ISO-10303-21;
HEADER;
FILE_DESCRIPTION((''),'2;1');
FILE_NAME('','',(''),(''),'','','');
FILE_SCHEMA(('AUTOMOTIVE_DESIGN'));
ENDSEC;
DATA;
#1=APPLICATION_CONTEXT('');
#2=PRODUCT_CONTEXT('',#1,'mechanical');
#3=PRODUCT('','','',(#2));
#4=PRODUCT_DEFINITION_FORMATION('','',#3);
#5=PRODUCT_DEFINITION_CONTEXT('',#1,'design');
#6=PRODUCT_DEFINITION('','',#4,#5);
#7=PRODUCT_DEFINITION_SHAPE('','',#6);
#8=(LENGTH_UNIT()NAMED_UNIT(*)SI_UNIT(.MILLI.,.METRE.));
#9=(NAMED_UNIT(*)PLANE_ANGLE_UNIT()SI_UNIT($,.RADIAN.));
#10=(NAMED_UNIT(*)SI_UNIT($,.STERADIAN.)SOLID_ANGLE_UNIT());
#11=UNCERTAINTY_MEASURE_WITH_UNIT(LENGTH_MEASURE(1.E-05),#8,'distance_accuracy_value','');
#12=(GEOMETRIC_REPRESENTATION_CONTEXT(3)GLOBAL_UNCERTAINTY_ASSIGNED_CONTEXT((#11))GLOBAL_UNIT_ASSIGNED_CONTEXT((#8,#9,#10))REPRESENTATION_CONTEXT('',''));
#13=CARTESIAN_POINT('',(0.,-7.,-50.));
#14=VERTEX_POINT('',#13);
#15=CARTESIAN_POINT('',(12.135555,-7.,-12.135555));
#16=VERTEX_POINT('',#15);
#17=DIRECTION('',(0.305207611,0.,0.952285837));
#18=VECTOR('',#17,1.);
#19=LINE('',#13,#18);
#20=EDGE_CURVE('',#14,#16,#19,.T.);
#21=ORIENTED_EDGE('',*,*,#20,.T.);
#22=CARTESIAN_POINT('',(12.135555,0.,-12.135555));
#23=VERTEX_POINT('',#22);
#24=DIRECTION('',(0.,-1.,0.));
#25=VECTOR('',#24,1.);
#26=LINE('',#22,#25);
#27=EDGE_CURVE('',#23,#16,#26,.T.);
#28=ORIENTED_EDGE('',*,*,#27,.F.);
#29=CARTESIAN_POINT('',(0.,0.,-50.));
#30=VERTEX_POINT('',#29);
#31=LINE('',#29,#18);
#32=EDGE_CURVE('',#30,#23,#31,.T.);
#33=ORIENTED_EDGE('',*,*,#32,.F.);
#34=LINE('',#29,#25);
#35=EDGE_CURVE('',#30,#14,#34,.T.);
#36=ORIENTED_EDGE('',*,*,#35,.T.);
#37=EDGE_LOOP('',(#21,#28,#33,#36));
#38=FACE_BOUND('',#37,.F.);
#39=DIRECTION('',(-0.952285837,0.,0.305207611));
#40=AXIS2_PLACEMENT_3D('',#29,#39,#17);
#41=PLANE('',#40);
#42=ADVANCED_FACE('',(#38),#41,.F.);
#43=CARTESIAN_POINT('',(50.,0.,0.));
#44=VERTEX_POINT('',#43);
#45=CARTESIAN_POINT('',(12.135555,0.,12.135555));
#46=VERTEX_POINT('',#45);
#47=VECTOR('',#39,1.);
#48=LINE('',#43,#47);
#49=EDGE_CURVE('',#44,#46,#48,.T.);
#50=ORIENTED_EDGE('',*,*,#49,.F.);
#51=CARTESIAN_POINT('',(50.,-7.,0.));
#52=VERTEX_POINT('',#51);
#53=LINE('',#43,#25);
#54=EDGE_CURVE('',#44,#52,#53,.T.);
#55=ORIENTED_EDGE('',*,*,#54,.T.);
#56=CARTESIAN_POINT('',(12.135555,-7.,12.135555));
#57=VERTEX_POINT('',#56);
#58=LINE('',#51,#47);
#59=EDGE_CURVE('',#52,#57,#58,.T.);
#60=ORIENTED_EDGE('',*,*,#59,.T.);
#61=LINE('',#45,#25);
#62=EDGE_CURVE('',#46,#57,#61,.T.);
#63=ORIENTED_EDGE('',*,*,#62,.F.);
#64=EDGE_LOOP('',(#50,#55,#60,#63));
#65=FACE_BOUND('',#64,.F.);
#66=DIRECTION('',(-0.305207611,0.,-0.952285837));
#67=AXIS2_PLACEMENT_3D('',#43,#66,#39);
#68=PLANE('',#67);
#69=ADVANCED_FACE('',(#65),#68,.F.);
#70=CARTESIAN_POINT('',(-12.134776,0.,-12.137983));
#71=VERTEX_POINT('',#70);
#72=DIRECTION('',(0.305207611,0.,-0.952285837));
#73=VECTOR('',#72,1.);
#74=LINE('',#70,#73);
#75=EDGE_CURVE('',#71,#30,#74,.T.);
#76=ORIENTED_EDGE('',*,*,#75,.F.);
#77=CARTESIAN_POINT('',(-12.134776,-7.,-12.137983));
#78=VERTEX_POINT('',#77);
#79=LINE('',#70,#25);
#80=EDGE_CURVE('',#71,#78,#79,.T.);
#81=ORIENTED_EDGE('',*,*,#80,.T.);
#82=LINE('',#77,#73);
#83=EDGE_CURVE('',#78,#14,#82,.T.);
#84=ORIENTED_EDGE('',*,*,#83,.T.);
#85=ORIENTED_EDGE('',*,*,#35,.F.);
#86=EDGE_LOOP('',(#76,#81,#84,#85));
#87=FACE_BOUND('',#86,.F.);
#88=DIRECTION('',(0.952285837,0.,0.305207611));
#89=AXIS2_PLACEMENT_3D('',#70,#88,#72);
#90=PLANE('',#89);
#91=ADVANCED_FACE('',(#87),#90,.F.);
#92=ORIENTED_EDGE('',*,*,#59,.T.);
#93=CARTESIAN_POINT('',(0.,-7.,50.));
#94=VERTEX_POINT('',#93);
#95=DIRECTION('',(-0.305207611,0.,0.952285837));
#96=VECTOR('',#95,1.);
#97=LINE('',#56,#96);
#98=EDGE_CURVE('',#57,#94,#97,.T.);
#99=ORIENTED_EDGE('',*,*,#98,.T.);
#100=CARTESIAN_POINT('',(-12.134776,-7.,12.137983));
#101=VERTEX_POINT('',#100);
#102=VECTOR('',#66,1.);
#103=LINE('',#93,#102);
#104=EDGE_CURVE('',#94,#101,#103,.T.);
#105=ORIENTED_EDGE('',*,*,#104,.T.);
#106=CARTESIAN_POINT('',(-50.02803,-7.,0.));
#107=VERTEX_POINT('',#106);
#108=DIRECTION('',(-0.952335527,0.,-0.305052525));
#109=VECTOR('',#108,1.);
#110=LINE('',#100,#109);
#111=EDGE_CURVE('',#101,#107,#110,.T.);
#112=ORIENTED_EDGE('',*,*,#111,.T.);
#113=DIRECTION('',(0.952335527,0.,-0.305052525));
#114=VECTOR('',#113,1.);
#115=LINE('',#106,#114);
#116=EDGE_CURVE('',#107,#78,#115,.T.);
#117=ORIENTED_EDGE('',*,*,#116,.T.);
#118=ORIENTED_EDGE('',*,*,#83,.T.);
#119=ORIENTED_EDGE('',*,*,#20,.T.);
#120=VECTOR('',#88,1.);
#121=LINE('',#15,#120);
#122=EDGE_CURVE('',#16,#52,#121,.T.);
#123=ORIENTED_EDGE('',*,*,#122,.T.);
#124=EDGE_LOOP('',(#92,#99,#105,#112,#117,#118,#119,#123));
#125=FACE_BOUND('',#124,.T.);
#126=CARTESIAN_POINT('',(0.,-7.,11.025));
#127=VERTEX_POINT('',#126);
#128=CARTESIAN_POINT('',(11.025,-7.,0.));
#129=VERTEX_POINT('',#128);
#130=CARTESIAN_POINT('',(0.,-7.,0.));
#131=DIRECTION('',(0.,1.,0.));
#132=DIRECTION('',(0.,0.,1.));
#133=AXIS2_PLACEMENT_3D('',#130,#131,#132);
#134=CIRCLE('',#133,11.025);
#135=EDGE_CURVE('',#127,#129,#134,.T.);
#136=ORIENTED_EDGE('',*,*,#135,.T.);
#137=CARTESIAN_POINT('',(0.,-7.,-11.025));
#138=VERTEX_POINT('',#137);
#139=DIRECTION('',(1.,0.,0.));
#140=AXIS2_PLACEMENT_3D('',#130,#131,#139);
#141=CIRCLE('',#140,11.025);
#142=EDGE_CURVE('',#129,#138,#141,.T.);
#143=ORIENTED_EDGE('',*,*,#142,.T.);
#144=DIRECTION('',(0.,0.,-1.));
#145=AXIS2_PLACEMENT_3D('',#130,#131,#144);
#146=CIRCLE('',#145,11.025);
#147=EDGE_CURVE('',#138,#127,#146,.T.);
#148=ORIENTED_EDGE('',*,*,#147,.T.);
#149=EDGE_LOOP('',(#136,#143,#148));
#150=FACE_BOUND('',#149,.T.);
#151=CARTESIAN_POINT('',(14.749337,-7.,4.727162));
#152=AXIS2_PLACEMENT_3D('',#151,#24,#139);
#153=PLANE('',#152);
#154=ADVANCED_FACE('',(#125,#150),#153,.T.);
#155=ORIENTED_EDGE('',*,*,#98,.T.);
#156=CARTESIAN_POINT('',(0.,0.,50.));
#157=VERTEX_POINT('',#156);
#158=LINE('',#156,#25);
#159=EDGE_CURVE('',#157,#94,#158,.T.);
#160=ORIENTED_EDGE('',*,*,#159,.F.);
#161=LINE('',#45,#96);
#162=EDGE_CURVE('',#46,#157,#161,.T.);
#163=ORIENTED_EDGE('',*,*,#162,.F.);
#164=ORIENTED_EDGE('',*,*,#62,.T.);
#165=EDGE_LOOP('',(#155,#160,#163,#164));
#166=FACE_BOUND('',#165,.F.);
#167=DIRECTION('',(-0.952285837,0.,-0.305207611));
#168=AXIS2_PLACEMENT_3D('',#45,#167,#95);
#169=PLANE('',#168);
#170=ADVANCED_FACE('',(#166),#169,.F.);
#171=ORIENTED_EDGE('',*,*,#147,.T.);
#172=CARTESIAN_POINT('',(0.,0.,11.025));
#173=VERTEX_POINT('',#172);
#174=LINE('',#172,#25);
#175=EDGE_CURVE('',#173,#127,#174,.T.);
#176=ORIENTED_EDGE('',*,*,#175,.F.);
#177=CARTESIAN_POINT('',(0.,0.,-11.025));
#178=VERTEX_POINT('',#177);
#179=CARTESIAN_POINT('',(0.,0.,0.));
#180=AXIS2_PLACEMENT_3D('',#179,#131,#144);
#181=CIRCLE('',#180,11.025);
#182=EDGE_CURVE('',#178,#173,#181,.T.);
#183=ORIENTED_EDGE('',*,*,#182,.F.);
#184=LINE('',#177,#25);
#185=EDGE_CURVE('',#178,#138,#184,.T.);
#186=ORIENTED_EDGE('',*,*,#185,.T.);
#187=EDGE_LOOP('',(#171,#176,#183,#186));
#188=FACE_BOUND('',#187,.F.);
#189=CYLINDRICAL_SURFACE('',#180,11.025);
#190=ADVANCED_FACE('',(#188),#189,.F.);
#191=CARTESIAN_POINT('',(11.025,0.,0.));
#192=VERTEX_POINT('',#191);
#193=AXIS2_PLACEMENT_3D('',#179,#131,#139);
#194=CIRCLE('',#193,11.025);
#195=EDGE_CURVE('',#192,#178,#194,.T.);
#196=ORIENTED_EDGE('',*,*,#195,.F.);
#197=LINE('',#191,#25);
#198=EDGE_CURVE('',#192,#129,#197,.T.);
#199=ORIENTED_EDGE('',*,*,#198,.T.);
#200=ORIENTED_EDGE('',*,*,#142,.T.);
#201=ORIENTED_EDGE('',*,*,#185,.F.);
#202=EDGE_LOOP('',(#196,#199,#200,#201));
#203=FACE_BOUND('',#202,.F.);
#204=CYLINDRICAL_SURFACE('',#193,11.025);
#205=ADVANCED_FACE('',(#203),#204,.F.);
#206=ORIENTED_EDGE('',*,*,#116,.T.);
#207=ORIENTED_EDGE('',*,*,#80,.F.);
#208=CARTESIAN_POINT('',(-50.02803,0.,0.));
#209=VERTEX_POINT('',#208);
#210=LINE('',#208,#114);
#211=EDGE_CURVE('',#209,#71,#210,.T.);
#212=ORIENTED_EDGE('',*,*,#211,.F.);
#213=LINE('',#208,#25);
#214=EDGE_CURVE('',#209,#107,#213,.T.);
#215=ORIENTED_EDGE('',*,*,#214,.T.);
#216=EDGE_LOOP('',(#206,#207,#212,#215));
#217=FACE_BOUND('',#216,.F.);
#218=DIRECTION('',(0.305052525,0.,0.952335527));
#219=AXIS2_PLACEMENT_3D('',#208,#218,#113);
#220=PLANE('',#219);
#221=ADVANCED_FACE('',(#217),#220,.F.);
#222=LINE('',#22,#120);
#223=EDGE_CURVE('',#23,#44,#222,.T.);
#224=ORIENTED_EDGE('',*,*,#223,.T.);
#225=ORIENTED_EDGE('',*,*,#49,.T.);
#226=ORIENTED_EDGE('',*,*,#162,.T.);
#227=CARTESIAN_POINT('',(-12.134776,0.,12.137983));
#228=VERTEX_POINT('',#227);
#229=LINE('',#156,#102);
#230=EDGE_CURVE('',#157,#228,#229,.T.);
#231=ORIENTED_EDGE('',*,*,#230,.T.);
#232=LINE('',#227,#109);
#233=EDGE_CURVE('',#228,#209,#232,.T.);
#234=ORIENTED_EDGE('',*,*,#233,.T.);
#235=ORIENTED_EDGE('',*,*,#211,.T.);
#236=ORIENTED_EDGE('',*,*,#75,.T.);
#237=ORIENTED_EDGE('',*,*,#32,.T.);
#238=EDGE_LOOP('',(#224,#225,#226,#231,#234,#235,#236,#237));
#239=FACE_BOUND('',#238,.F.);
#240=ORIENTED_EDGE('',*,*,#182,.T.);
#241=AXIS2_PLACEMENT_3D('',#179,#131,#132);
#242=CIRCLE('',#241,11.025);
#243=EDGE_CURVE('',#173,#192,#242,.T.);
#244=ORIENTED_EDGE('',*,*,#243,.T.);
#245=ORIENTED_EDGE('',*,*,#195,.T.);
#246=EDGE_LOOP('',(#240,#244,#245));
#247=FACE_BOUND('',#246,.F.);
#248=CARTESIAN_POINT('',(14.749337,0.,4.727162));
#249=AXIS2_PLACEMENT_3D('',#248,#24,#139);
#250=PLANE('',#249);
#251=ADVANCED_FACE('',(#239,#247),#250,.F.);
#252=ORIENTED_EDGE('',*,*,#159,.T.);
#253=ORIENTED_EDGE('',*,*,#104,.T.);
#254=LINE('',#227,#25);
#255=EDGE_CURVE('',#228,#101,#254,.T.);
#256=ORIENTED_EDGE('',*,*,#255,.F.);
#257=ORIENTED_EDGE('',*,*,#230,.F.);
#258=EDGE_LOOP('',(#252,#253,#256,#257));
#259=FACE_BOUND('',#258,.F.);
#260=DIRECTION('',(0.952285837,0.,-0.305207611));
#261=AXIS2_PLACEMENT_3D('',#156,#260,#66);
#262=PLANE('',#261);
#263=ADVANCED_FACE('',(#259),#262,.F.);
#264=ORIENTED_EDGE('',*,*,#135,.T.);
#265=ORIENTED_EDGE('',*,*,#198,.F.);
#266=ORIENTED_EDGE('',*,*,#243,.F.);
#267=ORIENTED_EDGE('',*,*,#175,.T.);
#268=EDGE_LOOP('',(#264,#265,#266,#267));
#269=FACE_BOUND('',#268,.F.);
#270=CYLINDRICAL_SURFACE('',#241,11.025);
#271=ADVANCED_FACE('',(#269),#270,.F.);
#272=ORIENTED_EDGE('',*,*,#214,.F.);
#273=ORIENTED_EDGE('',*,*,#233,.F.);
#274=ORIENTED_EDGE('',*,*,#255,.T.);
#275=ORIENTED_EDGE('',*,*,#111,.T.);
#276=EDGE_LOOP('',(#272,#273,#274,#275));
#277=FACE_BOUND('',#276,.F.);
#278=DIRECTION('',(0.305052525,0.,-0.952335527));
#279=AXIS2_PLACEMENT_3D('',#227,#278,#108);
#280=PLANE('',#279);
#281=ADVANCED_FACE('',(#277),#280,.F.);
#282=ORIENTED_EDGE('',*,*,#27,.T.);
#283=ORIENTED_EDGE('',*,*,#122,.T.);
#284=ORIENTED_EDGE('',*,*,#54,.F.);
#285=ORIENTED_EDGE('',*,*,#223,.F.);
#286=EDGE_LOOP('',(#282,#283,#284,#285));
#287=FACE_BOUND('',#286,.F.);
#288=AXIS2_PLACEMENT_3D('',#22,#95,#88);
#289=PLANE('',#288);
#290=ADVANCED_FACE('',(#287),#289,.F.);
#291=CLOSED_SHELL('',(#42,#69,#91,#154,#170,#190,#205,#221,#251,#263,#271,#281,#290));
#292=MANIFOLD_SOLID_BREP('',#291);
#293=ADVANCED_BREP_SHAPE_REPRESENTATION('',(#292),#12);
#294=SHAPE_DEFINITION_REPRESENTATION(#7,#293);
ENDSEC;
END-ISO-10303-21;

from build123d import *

# Parameters (mm, degrees)
F1_DEPTH = 7


with BuildPart() as f1:
    # F0 (on Front) → F1 (new body)
    with BuildSketch(Plane.XZ):
        with BuildLine():
            Line((13.0394884775, 9.315168557), (16.025, 0))
            ThreePointArc((16.025, 0), (15.2603805302, 4.8909519599), (13.0394884775, 9.315168557))
        make_face()
        with BuildLine():
            ThreePointArc((13.0394884775, 9.315168557), (15.2603805302, 4.8909519599), (16.025, 0))
            ThreePointArc((16.025, 0), (15.2603805302, -4.8909519599), (13.0394884775, -9.315168557))
            Line((13.0394884775, -9.315168557), (12.1355547141, -12.1355547141))
            Line((12.1355547141, -12.1355547141), (50, 0))
            Line((50, 0), (12.1355547141, 12.1355547141))
            Line((12.1355547141, 12.1355547141), (13.0394884775, 9.315168557))
        make_face()
        with BuildLine():
            Line((11.025, 0), (16.025, 0))
            Line((16.025, 0), (13.0394884775, 9.315168557))
            ThreePointArc((13.0394884775, 9.315168557), (11.3313861685, 11.3313861685), (9.315168557, 13.0394884775))
            Line((9.315168557, 13.0394884775), (0, 16.025))
            Line((0, 16.025), (0, 11.025))
            ThreePointArc((0, 11.025), (7.7958522626, 7.7958522626), (11.025, 0))
        make_face()
        with BuildLine():
            ThreePointArc((13.0394884775, -9.315168557), (15.2603805302, -4.8909519599), (16.025, 0))
            Line((16.025, 0), (13.0394884775, -9.315168557))
        make_face()
        with BuildLine():
            Line((13.0394884775, -9.315168557), (16.025, 0))
            Line((16.025, 0), (11.025, 0))
            ThreePointArc((11.025, 0), (7.7958522626, -7.7958522626), (0, -11.025))
            Line((0, -11.025), (0, -16.025))
            Line((0, -16.025), (9.315168557, -13.0394884775))
            ThreePointArc((9.315168557, -13.0394884775), (11.3313861685, -11.3313861685), (13.0394884775, -9.315168557))
        make_face()
        with BuildLine():
            ThreePointArc((9.315168557, 13.0394884775), (11.3313861685, 11.3313861685), (13.0394884775, 9.315168557))
            Line((13.0394884775, 9.315168557), (12.1355547141, 12.1355547141))
            Line((12.1355547141, 12.1355547141), (9.315168557, 13.0394884775))
        make_face()
        with BuildLine():
            Line((12.1355547141, -12.1355547141), (13.0394884775, -9.315168557))
            ThreePointArc((13.0394884775, -9.315168557), (11.3313861685, -11.3313861685), (9.315168557, -13.0394884775))
            Line((9.315168557, -13.0394884775), (12.1355547141, -12.1355547141))
        make_face()
        with BuildLine():
            Line((0, 16.025), (9.315168557, 13.0394884775))
            ThreePointArc((9.315168557, 13.0394884775), (4.8909519599, 15.2603805302), (0, 16.025))
        make_face()
        with BuildLine():
            ThreePointArc((0, 16.025), (4.8909519599, 15.2603805302), (9.315168557, 13.0394884775))
            Line((9.315168557, 13.0394884775), (12.1355547141, 12.1355547141))
            Line((12.1355547141, 12.1355547141), (0, 50))
            Line((0, 50), (-12.1347763783, 12.1379832191))
            Line((-12.1347763783, 12.1379832191), (-9.3109210563, 13.0425217686))
            ThreePointArc((-9.3109210563, 13.0425217686), (-4.8884667156, 15.2611768278), (0, 16.025))
        make_face()
        with BuildLine():
            Line((12.1355547141, -12.1355547141), (9.315168557, -13.0394884775))
            ThreePointArc((9.315168557, -13.0394884775), (4.8909519599, -15.2603805302), (0, -16.025))
            ThreePointArc((0, -16.025), (-4.8884667156, -15.2611768278), (-9.3109210563, -13.0425217686))
            Line((-9.3109210563, -13.0425217686), (-12.1347763783, -12.1379832191))
            Line((-12.1347763783, -12.1379832191), (0, -50))
            Line((0, -50), (12.1355547141, -12.1355547141))
        make_face()
        with BuildLine():
            ThreePointArc((0, -16.025), (4.8909519599, -15.2603805302), (9.315168557, -13.0394884775))
            Line((9.315168557, -13.0394884775), (0, -16.025))
        make_face()
        with BuildLine():
            ThreePointArc((0, -11.025), (-11.025, 0), (0, 11.025))
            Line((0, 11.025), (0, 16.025))
            Line((0, 16.025), (-9.3109210563, 13.0425217686))
            ThreePointArc((-9.3109210563, 13.0425217686), (-11.3295406823, 11.3332313542), (-13.0394884775, 9.315168557))
            Line((-13.0394884775, 9.315168557), (-16.025, 0))
            Line((-16.025, 0), (-13.0394884775, -9.315168557))
            ThreePointArc((-13.0394884775, -9.315168557), (-11.3295406823, -11.3332313542), (-9.3109210563, -13.0425217686))
            Line((-9.3109210563, -13.0425217686), (0, -16.025))
            Line((0, -16.025), (0, -11.025))
        make_face()
        with BuildLine():
            Line((-9.3109210563, 13.0425217686), (0, 16.025))
            ThreePointArc((0, 16.025), (-4.8884667156, 15.2611768278), (-9.3109210563, 13.0425217686))
        make_face()
        with BuildLine():
            ThreePointArc((-9.3109210563, -13.0425217686), (-4.8884667156, -15.2611768278), (0, -16.025))
            Line((0, -16.025), (-9.3109210563, -13.0425217686))
        make_face()
        with BuildLine():
            ThreePointArc((-13.0394884775, 9.315168557), (-11.3295406823, 11.3332313542), (-9.3109210563, 13.0425217686))
            Line((-9.3109210563, 13.0425217686), (-12.1347763783, 12.1379832191))
            Line((-12.1347763783, 12.1379832191), (-13.0394884775, 9.315168557))
        make_face()
        with BuildLine():
            Line((-13.0394884775, 9.315168557), (-12.1347763783, 12.1379832191))
            Line((-12.1347763783, 12.1379832191), (-50.0280298293, 0))
            Line((-50.0280298293, 0), (-12.1347763783, -12.1379832191))
            Line((-12.1347763783, -12.1379832191), (-13.0394884775, -9.315168557))
            ThreePointArc((-13.0394884775, -9.315168557), (-15.2603805302, -4.8909519599), (-16.025, 0))
            ThreePointArc((-16.025, 0), (-15.2603805302, 4.8909519599), (-13.0394884775, 9.315168557))
        make_face()
        with BuildLine():
            Line((-12.1347763783, -12.1379832191), (-9.3109210563, -13.0425217686))
            ThreePointArc((-9.3109210563, -13.0425217686), (-11.3295406823, -11.3332313542), (-13.0394884775, -9.315168557))
            Line((-13.0394884775, -9.315168557), (-12.1347763783, -12.1379832191))
        make_face()
        with BuildLine():
            Line((-16.025, 0), (-13.0394884775, 9.315168557))
            ThreePointArc((-13.0394884775, 9.315168557), (-15.2603805302, 4.8909519599), (-16.025, 0))
        make_face()
        with BuildLine():
            ThreePointArc((-16.025, 0), (-15.2603805302, -4.8909519599), (-13.0394884775, -9.315168557))
            Line((-13.0394884775, -9.315168557), (-16.025, 0))
        make_face()
    extrude(amount=F1_DEPTH)


solid = f1.part
